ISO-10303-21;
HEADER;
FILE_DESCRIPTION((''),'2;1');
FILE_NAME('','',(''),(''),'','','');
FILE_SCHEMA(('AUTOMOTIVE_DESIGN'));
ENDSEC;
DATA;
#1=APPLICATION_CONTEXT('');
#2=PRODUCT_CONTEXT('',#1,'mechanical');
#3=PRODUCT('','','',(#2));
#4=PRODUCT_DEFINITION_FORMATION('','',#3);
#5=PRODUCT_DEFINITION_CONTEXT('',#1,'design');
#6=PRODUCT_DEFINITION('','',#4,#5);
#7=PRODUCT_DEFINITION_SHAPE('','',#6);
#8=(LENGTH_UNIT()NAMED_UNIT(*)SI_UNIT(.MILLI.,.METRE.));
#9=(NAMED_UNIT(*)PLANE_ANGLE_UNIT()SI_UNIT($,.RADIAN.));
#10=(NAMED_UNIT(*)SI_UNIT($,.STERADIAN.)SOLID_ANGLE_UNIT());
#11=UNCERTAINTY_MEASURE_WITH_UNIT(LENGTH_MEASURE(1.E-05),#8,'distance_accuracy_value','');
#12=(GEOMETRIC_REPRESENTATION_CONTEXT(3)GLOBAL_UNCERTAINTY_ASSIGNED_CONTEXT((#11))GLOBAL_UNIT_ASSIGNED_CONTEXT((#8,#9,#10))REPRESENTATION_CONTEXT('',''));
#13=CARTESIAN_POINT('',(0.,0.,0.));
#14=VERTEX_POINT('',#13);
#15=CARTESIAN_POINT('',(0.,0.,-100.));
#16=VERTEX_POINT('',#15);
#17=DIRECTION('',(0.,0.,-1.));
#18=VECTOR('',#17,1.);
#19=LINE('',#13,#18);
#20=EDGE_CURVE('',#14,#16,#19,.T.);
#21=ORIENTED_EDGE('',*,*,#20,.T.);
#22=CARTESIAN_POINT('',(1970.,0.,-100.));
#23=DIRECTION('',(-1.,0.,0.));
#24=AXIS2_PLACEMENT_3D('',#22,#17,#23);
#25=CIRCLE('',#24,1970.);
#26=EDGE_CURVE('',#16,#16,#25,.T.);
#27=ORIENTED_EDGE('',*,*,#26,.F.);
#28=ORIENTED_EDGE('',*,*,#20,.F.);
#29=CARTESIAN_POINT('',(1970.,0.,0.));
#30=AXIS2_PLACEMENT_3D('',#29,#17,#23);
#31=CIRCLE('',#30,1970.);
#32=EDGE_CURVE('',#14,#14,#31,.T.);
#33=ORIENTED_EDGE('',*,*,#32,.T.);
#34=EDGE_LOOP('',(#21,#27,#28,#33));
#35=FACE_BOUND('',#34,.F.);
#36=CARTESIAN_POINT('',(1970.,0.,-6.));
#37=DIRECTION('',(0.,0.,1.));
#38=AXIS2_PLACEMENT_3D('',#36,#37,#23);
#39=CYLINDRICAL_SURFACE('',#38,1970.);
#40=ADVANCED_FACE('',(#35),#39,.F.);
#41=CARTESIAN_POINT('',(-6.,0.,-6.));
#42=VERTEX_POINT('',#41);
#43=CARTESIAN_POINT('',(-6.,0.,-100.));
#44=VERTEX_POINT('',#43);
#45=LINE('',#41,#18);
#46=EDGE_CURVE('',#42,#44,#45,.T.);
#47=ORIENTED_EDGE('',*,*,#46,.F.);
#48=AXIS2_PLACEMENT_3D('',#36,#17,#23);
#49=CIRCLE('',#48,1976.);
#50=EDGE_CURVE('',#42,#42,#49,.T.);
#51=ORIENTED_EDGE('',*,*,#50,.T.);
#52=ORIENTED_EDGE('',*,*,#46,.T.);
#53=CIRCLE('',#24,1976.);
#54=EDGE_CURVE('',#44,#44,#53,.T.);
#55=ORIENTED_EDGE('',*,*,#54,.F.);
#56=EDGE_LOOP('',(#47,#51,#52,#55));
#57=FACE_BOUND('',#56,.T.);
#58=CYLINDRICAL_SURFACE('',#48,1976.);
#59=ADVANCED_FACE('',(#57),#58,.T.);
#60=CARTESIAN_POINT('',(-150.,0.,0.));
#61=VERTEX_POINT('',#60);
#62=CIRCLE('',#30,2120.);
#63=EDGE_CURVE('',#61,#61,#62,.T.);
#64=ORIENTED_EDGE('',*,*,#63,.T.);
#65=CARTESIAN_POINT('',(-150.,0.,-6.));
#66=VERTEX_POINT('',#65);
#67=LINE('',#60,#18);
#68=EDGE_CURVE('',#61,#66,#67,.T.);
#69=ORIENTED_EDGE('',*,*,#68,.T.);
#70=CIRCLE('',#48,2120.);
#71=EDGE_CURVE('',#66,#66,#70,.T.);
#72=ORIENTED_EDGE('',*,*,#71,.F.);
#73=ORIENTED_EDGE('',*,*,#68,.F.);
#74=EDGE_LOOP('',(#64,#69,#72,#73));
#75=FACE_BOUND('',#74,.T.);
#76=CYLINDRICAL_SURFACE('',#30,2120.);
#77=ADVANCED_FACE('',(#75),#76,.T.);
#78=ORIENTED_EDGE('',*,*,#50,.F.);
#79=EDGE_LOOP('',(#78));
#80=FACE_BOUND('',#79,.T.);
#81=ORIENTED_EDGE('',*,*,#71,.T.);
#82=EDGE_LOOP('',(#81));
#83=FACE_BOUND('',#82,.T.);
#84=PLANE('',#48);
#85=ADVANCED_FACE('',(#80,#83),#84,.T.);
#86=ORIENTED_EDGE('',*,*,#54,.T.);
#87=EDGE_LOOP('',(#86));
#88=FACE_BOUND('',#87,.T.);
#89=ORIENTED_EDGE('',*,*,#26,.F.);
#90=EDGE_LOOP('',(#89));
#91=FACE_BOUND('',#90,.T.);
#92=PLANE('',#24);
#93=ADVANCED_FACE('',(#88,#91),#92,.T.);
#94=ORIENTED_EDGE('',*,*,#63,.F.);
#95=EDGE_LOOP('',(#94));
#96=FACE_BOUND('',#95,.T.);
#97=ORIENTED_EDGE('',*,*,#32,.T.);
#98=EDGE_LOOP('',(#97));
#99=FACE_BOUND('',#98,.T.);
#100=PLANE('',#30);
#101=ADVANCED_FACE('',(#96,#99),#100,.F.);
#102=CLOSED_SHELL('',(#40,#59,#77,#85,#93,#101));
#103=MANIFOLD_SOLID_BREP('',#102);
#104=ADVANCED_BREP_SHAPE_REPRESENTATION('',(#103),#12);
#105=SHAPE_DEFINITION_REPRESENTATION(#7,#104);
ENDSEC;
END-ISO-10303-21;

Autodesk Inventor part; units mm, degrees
ref_plane "YZ Plane" through (0, 0, 0) normal (1, 0, 0) x (0, 1, 0)
ref_plane "XZ Plane" through (0, 0, 0) normal (0, 1, 0) x (-1, 0, 0)
ref_plane "XY Plane" through (0, 0, 0) normal (0, 0, 1) x (1, 0, 0)
sketch "Sketch1" plane through (0, 0, 0) normal (0, 1, 0) x (-1, 0, 0)
  line L0 (0, 0) -> (150, 0)
  line L1 (150, 0) -> (150, -6)
  line L2 (150, -6) -> (6, -6)
  line L3 (0, -6) -> (0, 0)
  line L4 (0, 0) -> (6, 0)
  line L5 (6, -6) -> (6, -100)
  line L6 (6, -100) -> (0, -100)
  line L7 (0, -100) -> (0, 0)
  line L8 (150, -3) -> (-1970, -3)
  line L9 (-1970, -3) -> (-1970, -100)
  dimension "d0" = 150
  dimension "d1" = 6
  dimension "d2" = 6
  dimension "d3" = 100
  dimension "d4" = 2120
revolve "Revolution1" add sketch "Sketch1" angle 360 about axis through (1970, 0, -3) along (0, 0, -1)
properties part number "Support Ring, L-Section" material "Aluminum 6061"
